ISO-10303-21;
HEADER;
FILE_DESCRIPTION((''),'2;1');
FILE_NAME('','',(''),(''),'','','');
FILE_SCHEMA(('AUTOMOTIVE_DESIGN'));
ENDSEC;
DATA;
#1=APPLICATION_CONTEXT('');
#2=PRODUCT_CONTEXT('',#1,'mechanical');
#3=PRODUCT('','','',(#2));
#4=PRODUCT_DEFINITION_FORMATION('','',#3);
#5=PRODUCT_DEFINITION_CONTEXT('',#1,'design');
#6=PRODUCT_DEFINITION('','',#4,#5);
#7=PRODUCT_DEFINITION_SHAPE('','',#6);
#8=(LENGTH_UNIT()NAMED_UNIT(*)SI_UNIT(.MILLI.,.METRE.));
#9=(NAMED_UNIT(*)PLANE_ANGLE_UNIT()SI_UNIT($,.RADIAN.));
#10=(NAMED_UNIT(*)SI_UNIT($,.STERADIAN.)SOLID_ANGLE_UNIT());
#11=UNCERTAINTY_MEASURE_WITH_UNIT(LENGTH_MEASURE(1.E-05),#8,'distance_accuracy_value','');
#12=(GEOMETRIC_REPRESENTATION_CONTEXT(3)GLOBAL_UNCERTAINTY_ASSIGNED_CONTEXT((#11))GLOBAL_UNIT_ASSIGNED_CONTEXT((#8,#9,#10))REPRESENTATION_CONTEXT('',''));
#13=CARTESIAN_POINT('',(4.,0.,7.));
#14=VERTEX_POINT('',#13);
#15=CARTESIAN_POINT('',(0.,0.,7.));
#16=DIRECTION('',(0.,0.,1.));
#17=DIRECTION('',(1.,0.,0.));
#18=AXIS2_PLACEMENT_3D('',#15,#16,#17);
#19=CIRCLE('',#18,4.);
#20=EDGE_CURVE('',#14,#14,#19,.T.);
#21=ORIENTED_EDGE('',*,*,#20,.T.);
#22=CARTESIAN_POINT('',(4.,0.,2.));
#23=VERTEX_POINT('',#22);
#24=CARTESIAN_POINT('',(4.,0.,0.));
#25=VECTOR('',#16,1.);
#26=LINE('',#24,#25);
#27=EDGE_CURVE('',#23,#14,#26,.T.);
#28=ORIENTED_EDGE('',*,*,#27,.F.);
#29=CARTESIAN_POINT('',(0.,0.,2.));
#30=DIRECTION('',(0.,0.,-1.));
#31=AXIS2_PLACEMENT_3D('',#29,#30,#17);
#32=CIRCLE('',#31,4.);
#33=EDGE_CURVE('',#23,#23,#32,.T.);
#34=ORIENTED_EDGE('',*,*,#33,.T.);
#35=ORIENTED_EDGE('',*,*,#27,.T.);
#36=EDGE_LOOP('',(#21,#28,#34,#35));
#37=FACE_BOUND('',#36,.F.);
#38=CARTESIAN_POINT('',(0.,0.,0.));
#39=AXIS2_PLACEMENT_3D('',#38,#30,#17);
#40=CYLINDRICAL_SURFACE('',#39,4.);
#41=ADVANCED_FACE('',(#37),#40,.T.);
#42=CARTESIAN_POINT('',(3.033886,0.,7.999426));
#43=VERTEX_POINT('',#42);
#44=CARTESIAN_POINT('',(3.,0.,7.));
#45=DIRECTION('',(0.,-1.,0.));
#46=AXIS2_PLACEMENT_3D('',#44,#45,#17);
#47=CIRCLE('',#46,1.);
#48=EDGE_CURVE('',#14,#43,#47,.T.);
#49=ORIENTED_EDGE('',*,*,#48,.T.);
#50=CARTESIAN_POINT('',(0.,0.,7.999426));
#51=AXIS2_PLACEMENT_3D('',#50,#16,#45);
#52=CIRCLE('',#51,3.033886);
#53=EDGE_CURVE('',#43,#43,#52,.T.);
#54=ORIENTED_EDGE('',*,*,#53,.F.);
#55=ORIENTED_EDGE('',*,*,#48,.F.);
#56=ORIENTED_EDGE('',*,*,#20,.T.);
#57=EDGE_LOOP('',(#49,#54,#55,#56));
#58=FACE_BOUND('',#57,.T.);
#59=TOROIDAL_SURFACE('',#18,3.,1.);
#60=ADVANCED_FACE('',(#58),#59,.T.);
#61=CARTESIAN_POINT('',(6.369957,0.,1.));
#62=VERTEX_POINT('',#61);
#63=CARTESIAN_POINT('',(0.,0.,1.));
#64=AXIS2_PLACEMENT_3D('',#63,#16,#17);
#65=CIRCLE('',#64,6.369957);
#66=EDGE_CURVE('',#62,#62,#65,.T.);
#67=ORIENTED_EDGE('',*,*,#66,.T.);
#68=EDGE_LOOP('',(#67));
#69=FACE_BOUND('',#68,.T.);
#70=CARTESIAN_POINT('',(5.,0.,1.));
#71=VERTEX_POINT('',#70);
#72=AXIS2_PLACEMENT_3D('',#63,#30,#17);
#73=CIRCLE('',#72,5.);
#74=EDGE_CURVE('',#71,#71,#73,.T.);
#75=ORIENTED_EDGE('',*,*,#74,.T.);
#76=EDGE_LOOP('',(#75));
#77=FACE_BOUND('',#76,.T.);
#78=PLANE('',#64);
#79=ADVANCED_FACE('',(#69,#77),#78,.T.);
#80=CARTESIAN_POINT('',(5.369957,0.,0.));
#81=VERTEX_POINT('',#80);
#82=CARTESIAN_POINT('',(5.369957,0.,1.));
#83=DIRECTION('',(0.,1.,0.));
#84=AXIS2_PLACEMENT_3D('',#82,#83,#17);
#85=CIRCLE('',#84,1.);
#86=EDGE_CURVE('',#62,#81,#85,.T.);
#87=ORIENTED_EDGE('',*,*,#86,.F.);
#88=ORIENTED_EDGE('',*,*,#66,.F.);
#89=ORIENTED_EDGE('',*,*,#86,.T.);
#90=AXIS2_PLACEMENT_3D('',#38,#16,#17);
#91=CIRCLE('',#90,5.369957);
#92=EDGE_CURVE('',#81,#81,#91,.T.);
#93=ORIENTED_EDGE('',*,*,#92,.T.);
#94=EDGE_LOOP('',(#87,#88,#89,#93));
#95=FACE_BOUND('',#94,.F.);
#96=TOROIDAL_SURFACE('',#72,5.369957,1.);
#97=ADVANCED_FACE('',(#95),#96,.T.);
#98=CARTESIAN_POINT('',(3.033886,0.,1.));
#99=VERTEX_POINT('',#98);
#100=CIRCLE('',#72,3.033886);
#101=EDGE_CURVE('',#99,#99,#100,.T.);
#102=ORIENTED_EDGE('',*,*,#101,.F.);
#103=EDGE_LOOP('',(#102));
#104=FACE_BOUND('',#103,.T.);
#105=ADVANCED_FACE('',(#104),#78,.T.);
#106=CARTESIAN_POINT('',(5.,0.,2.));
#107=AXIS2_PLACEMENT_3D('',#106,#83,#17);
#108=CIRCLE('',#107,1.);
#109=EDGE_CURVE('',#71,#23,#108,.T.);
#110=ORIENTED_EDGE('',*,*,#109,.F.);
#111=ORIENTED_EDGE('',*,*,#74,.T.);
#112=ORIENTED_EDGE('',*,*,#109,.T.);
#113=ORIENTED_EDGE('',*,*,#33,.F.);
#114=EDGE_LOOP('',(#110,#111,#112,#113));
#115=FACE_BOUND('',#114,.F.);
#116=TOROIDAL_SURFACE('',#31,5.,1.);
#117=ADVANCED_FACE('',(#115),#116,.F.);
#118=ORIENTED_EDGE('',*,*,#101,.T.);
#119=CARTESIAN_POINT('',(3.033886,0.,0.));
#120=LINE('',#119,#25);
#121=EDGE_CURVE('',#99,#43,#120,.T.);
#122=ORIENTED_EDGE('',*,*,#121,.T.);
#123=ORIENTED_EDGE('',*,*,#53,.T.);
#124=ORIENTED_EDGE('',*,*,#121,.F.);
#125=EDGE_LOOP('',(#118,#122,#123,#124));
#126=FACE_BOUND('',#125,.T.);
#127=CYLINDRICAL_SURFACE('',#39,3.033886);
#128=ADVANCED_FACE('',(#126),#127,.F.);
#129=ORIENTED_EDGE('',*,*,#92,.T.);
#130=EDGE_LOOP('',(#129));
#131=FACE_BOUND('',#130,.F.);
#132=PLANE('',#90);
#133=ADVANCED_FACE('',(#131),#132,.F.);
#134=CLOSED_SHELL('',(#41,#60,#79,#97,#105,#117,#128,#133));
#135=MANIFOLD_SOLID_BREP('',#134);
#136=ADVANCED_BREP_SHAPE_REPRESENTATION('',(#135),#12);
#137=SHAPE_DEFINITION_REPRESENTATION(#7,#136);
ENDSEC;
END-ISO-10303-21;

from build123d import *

# Parameters (mm, degrees)
F0_R     = 4
F1_DEPTH = 8
F2_R     = 3.0338863289
F3_DEPTH = 9.4
F4_R     = 6.3699570271
F5_DEPTH = 1
F6_R     = 1


# Not quite as in the source:
# - a fillet or chamfer that OpenCascade refuses, or shapes differently, is made with other operations: its cross-section is extruded or revolved along the edge and cut away or added


with BuildPart() as f1:
    # F0 (on Top) → F1 (new body)
    with BuildSketch(Plane.XY):
        Circle(F0_R)
    extrude(amount=F1_DEPTH)

    # F2 (on Top) → F3 (cut)
    with BuildSketch(Plane.XY):
        Circle(F2_R)
    extrude(amount=F3_DEPTH, mode=Mode.SUBTRACT)

    # F4 (on Top) → F5 (join)
    with BuildSketch(Plane.XY):
        Circle(F4_R)
    extrude(amount=F5_DEPTH)

    # F6
    f6_edges = [f1.edges().sort_by_distance(p)[0] for p in [
        (-4, 0, 1),
    ]]
    fillet(f6_edges, radius=F6_R)

    # F7: fillet of radius 1 on 2 edges, made by hand

    # F7_s1 → F7_t2 (revolve, cut)
    with BuildSketch(Plane.XZ):
        with BuildLine():
            ThreePointArc((6.3699570271, 1), (6.0770638082, 0.2928932188), (5.3699570271, 0))
            Line((5.3699570271, 0), (6.3699570271, 0))
            Line((6.3699570271, 0), (6.3699570271, 1))
        make_face()
    revolve(axis=Axis((0, 0, 0), (0, 0, 1)), mode=Mode.SUBTRACT)

    # F7_s3 → F7_t4 (revolve, cut)
    with BuildSketch(Plane.XZ):
        with BuildLine():
            ThreePointArc((4, 7), (3.7071067812, 7.7071067812), (3, 8))
            Line((3, 8), (4, 8))
            Line((4, 8), (4, 7))
        make_face()
    revolve(axis=Axis((0, 0, 8), (0, 0, 1)), mode=Mode.SUBTRACT)


solid = f1.part
